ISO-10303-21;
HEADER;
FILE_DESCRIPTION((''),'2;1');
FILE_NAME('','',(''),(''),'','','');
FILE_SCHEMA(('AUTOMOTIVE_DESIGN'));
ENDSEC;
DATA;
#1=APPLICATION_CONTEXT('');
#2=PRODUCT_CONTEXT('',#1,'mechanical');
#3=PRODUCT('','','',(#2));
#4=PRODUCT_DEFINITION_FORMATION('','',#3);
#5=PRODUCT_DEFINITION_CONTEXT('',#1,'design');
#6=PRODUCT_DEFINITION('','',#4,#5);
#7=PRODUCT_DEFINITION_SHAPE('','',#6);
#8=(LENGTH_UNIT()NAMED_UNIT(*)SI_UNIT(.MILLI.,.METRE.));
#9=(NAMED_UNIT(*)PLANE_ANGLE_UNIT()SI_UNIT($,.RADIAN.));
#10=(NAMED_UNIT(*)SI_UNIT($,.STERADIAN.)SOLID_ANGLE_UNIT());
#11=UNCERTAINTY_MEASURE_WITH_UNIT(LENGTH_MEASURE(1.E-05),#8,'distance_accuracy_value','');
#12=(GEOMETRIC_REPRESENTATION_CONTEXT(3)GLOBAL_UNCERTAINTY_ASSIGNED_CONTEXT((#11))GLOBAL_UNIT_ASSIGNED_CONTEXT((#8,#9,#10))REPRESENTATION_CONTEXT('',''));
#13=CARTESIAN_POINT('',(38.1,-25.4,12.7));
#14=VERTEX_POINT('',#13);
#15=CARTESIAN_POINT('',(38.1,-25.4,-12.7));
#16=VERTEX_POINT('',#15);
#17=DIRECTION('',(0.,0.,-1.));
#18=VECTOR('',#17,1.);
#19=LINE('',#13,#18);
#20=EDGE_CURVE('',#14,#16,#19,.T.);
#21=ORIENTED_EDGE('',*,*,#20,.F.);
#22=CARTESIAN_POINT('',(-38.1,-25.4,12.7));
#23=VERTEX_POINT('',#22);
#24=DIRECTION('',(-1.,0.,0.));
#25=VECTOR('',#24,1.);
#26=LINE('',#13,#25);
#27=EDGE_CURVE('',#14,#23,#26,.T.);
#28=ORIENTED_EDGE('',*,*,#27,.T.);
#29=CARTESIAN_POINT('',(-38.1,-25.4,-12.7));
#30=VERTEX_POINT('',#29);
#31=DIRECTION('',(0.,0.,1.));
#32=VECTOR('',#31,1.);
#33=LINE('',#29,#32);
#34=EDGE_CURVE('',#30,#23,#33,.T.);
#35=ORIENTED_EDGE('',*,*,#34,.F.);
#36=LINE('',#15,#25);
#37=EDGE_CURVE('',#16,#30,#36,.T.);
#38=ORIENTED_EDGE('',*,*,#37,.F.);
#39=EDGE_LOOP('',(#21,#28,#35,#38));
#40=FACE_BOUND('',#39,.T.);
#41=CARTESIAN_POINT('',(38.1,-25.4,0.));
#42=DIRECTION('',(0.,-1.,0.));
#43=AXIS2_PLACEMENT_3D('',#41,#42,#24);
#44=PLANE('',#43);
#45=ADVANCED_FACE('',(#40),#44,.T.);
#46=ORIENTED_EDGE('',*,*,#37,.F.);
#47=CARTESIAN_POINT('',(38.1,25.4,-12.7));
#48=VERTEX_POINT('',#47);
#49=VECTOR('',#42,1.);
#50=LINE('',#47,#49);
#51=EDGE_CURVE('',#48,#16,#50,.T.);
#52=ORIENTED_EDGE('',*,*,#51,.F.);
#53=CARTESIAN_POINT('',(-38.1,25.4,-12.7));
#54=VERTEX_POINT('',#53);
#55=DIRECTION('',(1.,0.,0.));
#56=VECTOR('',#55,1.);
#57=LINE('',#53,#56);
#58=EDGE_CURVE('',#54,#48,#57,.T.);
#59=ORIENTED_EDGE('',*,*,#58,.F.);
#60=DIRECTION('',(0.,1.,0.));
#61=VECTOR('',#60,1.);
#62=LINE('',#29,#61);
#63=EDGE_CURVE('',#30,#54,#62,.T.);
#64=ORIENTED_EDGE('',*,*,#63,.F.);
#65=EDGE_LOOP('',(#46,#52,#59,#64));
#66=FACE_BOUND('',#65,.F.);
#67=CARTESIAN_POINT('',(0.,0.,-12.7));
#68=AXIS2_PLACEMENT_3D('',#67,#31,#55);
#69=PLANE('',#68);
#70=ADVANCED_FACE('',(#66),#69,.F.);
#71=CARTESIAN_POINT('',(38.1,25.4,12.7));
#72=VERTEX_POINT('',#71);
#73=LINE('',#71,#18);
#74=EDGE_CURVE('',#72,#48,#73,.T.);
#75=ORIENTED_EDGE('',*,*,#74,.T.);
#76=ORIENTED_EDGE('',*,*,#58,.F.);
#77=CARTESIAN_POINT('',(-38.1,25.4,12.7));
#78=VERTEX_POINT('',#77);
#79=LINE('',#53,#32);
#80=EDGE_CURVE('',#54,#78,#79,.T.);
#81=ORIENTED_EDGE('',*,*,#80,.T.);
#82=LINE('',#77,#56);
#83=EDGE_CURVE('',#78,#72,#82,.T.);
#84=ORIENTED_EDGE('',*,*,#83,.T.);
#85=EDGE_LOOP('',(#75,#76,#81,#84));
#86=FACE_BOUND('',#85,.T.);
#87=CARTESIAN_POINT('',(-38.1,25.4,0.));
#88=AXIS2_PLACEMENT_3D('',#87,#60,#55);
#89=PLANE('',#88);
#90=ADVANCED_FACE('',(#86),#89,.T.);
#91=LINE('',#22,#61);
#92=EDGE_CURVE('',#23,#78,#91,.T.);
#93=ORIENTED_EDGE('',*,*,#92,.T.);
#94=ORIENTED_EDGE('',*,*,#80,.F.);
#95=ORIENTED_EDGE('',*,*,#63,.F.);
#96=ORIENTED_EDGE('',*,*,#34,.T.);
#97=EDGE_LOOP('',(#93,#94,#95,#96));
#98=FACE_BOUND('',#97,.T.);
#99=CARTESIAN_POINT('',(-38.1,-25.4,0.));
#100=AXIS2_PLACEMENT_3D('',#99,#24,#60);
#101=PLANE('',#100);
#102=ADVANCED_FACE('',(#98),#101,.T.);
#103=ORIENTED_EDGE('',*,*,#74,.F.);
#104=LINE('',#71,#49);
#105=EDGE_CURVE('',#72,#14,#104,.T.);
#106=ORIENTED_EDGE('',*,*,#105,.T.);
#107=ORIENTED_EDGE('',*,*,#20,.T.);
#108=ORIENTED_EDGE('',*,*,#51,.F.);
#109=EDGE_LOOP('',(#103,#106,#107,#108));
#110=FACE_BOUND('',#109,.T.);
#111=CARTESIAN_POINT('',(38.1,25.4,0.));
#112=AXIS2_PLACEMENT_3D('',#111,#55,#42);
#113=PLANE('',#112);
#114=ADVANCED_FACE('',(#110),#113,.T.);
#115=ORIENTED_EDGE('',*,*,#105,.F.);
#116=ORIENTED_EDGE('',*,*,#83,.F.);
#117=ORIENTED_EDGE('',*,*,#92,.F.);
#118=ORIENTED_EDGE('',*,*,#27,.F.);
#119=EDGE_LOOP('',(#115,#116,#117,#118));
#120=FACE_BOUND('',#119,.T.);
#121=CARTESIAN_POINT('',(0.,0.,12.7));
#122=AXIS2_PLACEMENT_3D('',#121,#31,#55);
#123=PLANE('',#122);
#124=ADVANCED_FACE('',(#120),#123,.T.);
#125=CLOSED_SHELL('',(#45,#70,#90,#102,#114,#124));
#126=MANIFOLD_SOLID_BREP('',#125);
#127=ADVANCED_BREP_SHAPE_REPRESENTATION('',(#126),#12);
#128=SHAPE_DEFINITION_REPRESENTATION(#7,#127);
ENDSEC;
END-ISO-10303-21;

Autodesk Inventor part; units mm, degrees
ref_plane "YZ Plane" through (0, 0, 0) normal (1, 0, 0) x (0, 1, 0)
ref_plane "XZ Plane" through (0, 0, 0) normal (0, 1, 0) x (-1, 0, 0)
ref_plane "XY Plane" through (0, 0, 0) normal (0, 0, 1) x (1, 0, 0)
sketch "Sketch1" plane through (0, 0, 0) normal (0, 0, 1) x (1, 0, 0)
  line L0 (0, 0) -> (-38.1, 25.4) construction
  line L1 (0, 0) -> (38.1, -25.4) construction
  line L2 (-38.1, 25.4) -> (38.1, 25.4)
  line L3 (38.1, 25.4) -> (38.1, -25.4)
  line L4 (38.1, -25.4) -> (-38.1, -25.4)
  line L5 (-38.1, -25.4) -> (-38.1, 25.4)
  point P0 (0, 0)
extrude "Extrusion1" add sketch "Sketch1" along normal mid plane 25.4
properties part number "Block, Center Constrained" material "Steel, MS"
